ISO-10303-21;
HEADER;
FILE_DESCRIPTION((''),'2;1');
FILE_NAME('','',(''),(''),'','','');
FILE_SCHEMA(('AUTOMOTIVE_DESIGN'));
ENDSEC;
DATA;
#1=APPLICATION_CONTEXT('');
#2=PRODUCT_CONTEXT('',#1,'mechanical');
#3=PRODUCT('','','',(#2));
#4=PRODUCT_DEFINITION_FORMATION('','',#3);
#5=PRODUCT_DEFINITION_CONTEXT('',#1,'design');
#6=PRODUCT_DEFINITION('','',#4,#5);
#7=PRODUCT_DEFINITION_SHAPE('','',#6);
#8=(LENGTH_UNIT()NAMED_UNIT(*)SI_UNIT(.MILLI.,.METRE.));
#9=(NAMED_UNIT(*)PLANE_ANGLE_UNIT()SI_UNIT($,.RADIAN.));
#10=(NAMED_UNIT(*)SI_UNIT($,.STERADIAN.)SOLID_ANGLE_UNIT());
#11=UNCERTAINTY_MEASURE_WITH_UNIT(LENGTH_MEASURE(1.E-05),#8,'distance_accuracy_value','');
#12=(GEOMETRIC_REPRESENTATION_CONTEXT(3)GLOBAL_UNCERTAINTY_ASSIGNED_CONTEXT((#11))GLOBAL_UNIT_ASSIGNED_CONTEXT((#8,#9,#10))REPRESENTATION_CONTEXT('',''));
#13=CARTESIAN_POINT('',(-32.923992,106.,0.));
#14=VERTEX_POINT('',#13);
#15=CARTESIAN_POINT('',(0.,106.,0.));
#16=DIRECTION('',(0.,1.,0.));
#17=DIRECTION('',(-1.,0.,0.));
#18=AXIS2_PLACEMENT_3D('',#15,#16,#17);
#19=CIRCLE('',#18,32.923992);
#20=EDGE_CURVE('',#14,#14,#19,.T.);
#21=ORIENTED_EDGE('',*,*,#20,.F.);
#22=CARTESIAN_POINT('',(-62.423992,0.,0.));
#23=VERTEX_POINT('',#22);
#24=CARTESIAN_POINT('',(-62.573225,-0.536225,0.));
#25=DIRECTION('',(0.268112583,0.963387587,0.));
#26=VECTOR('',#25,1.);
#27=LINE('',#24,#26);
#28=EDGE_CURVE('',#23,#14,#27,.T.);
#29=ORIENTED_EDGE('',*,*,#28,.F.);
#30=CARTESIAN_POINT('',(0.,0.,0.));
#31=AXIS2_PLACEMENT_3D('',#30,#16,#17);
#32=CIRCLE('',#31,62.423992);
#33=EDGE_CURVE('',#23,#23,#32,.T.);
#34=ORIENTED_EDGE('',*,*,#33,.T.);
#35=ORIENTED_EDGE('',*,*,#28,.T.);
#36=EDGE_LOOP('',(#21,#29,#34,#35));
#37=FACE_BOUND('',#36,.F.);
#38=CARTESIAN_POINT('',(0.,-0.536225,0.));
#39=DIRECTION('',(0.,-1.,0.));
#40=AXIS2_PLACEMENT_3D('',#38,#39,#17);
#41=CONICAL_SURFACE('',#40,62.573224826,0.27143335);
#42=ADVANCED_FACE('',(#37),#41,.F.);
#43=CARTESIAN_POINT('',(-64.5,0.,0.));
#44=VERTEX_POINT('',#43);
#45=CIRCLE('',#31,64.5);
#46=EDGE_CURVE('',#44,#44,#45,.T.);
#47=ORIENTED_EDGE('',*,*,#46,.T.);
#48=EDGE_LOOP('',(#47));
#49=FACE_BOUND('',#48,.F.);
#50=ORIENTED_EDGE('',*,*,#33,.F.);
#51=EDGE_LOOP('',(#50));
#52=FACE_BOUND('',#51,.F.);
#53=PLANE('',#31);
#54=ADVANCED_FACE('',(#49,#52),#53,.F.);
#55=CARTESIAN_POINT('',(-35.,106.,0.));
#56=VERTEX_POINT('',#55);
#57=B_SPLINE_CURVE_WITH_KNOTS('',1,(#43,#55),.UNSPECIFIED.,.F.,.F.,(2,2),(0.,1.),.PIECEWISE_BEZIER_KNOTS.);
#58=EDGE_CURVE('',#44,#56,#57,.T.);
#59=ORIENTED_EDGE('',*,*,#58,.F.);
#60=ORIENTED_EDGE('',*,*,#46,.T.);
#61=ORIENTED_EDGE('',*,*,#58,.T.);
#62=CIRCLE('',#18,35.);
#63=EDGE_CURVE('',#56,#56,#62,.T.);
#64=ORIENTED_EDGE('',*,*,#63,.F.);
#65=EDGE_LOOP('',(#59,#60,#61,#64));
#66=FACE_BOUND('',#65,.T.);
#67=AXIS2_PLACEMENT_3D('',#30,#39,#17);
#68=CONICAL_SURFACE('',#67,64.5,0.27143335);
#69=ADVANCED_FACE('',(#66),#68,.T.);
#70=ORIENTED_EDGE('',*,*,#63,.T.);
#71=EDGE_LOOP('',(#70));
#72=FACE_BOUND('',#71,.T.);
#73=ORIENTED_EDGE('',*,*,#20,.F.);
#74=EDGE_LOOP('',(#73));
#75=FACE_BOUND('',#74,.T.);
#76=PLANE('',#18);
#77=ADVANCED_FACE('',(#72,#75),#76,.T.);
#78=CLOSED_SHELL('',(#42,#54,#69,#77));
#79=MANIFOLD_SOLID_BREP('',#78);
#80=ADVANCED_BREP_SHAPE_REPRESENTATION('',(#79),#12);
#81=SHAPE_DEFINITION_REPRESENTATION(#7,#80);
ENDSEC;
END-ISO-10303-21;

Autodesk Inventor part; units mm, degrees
ref_plane "YZ Plane" through (0, 0, 0) normal (1, 0, 0) x (0, 1, 0)
ref_plane "XY Plane" through (0, 0, 0) normal (0, 0, 1) x (1, 0, 0)
sketch "Szkic6" plane through (0, 0, 0) normal (0, 1, 0) x (-1, 0, 0)
  circle A0 centre (0, 0) radius 64.5
  dimension "d33" = 129
ref_plane "Płaszczyzna konstrukcyjna1" through (0, 106, 0) normal (0, 1, 0) x (-1, 0, 0)
sketch "Szkic7" plane through (0, 106, 0) normal (0, 1, 0) x (-1, 0, 0)
  circle A0 centre (0, 0) radius 35
  dimension "d35" = 70
loft "Wyciągnięcie złożone1" add profiles "Szkic6", "Szkic7"
shell "Skorupa1" thickness 2 removed faces 2 at (1.9985, 106, 11.019) at (-10.0865, 0, -16.1433)
equation "\"d33\" = OD1"
equation "\"d35\" = OD2"
equation "\"d52\" = THK"
equation "\"SzerokośćGięciaPodcięcia\" = Grubość"
equation "\"RozmiarPodcięciaNarożnika\" = 4 * Grubość"
equation "\"PromieńPrzejścia\" = PromieńGięcia"
equation "\"Rozmiar_promienia_Jacobiego\" = PromieńGięcia"
equation "\"Wielk_odstępu\" = Grubość"
equation "\"d2\" = PromieńGięcia"
equation "\"d23\" = PromieńGięcia"
equation "\"OD1\" = 129"
equation "\"OD2\" = 70"
equation "\"L\" = 106"
equation "\"THK\" = 2"
equation "\"d34\" = L"
equation "\"Grubość\" = 1.5"
equation "\"PromieńGięcia\" = 3"
properties part number "Redukcja symetryczna Ø129x70x2 L=106" material "304"
